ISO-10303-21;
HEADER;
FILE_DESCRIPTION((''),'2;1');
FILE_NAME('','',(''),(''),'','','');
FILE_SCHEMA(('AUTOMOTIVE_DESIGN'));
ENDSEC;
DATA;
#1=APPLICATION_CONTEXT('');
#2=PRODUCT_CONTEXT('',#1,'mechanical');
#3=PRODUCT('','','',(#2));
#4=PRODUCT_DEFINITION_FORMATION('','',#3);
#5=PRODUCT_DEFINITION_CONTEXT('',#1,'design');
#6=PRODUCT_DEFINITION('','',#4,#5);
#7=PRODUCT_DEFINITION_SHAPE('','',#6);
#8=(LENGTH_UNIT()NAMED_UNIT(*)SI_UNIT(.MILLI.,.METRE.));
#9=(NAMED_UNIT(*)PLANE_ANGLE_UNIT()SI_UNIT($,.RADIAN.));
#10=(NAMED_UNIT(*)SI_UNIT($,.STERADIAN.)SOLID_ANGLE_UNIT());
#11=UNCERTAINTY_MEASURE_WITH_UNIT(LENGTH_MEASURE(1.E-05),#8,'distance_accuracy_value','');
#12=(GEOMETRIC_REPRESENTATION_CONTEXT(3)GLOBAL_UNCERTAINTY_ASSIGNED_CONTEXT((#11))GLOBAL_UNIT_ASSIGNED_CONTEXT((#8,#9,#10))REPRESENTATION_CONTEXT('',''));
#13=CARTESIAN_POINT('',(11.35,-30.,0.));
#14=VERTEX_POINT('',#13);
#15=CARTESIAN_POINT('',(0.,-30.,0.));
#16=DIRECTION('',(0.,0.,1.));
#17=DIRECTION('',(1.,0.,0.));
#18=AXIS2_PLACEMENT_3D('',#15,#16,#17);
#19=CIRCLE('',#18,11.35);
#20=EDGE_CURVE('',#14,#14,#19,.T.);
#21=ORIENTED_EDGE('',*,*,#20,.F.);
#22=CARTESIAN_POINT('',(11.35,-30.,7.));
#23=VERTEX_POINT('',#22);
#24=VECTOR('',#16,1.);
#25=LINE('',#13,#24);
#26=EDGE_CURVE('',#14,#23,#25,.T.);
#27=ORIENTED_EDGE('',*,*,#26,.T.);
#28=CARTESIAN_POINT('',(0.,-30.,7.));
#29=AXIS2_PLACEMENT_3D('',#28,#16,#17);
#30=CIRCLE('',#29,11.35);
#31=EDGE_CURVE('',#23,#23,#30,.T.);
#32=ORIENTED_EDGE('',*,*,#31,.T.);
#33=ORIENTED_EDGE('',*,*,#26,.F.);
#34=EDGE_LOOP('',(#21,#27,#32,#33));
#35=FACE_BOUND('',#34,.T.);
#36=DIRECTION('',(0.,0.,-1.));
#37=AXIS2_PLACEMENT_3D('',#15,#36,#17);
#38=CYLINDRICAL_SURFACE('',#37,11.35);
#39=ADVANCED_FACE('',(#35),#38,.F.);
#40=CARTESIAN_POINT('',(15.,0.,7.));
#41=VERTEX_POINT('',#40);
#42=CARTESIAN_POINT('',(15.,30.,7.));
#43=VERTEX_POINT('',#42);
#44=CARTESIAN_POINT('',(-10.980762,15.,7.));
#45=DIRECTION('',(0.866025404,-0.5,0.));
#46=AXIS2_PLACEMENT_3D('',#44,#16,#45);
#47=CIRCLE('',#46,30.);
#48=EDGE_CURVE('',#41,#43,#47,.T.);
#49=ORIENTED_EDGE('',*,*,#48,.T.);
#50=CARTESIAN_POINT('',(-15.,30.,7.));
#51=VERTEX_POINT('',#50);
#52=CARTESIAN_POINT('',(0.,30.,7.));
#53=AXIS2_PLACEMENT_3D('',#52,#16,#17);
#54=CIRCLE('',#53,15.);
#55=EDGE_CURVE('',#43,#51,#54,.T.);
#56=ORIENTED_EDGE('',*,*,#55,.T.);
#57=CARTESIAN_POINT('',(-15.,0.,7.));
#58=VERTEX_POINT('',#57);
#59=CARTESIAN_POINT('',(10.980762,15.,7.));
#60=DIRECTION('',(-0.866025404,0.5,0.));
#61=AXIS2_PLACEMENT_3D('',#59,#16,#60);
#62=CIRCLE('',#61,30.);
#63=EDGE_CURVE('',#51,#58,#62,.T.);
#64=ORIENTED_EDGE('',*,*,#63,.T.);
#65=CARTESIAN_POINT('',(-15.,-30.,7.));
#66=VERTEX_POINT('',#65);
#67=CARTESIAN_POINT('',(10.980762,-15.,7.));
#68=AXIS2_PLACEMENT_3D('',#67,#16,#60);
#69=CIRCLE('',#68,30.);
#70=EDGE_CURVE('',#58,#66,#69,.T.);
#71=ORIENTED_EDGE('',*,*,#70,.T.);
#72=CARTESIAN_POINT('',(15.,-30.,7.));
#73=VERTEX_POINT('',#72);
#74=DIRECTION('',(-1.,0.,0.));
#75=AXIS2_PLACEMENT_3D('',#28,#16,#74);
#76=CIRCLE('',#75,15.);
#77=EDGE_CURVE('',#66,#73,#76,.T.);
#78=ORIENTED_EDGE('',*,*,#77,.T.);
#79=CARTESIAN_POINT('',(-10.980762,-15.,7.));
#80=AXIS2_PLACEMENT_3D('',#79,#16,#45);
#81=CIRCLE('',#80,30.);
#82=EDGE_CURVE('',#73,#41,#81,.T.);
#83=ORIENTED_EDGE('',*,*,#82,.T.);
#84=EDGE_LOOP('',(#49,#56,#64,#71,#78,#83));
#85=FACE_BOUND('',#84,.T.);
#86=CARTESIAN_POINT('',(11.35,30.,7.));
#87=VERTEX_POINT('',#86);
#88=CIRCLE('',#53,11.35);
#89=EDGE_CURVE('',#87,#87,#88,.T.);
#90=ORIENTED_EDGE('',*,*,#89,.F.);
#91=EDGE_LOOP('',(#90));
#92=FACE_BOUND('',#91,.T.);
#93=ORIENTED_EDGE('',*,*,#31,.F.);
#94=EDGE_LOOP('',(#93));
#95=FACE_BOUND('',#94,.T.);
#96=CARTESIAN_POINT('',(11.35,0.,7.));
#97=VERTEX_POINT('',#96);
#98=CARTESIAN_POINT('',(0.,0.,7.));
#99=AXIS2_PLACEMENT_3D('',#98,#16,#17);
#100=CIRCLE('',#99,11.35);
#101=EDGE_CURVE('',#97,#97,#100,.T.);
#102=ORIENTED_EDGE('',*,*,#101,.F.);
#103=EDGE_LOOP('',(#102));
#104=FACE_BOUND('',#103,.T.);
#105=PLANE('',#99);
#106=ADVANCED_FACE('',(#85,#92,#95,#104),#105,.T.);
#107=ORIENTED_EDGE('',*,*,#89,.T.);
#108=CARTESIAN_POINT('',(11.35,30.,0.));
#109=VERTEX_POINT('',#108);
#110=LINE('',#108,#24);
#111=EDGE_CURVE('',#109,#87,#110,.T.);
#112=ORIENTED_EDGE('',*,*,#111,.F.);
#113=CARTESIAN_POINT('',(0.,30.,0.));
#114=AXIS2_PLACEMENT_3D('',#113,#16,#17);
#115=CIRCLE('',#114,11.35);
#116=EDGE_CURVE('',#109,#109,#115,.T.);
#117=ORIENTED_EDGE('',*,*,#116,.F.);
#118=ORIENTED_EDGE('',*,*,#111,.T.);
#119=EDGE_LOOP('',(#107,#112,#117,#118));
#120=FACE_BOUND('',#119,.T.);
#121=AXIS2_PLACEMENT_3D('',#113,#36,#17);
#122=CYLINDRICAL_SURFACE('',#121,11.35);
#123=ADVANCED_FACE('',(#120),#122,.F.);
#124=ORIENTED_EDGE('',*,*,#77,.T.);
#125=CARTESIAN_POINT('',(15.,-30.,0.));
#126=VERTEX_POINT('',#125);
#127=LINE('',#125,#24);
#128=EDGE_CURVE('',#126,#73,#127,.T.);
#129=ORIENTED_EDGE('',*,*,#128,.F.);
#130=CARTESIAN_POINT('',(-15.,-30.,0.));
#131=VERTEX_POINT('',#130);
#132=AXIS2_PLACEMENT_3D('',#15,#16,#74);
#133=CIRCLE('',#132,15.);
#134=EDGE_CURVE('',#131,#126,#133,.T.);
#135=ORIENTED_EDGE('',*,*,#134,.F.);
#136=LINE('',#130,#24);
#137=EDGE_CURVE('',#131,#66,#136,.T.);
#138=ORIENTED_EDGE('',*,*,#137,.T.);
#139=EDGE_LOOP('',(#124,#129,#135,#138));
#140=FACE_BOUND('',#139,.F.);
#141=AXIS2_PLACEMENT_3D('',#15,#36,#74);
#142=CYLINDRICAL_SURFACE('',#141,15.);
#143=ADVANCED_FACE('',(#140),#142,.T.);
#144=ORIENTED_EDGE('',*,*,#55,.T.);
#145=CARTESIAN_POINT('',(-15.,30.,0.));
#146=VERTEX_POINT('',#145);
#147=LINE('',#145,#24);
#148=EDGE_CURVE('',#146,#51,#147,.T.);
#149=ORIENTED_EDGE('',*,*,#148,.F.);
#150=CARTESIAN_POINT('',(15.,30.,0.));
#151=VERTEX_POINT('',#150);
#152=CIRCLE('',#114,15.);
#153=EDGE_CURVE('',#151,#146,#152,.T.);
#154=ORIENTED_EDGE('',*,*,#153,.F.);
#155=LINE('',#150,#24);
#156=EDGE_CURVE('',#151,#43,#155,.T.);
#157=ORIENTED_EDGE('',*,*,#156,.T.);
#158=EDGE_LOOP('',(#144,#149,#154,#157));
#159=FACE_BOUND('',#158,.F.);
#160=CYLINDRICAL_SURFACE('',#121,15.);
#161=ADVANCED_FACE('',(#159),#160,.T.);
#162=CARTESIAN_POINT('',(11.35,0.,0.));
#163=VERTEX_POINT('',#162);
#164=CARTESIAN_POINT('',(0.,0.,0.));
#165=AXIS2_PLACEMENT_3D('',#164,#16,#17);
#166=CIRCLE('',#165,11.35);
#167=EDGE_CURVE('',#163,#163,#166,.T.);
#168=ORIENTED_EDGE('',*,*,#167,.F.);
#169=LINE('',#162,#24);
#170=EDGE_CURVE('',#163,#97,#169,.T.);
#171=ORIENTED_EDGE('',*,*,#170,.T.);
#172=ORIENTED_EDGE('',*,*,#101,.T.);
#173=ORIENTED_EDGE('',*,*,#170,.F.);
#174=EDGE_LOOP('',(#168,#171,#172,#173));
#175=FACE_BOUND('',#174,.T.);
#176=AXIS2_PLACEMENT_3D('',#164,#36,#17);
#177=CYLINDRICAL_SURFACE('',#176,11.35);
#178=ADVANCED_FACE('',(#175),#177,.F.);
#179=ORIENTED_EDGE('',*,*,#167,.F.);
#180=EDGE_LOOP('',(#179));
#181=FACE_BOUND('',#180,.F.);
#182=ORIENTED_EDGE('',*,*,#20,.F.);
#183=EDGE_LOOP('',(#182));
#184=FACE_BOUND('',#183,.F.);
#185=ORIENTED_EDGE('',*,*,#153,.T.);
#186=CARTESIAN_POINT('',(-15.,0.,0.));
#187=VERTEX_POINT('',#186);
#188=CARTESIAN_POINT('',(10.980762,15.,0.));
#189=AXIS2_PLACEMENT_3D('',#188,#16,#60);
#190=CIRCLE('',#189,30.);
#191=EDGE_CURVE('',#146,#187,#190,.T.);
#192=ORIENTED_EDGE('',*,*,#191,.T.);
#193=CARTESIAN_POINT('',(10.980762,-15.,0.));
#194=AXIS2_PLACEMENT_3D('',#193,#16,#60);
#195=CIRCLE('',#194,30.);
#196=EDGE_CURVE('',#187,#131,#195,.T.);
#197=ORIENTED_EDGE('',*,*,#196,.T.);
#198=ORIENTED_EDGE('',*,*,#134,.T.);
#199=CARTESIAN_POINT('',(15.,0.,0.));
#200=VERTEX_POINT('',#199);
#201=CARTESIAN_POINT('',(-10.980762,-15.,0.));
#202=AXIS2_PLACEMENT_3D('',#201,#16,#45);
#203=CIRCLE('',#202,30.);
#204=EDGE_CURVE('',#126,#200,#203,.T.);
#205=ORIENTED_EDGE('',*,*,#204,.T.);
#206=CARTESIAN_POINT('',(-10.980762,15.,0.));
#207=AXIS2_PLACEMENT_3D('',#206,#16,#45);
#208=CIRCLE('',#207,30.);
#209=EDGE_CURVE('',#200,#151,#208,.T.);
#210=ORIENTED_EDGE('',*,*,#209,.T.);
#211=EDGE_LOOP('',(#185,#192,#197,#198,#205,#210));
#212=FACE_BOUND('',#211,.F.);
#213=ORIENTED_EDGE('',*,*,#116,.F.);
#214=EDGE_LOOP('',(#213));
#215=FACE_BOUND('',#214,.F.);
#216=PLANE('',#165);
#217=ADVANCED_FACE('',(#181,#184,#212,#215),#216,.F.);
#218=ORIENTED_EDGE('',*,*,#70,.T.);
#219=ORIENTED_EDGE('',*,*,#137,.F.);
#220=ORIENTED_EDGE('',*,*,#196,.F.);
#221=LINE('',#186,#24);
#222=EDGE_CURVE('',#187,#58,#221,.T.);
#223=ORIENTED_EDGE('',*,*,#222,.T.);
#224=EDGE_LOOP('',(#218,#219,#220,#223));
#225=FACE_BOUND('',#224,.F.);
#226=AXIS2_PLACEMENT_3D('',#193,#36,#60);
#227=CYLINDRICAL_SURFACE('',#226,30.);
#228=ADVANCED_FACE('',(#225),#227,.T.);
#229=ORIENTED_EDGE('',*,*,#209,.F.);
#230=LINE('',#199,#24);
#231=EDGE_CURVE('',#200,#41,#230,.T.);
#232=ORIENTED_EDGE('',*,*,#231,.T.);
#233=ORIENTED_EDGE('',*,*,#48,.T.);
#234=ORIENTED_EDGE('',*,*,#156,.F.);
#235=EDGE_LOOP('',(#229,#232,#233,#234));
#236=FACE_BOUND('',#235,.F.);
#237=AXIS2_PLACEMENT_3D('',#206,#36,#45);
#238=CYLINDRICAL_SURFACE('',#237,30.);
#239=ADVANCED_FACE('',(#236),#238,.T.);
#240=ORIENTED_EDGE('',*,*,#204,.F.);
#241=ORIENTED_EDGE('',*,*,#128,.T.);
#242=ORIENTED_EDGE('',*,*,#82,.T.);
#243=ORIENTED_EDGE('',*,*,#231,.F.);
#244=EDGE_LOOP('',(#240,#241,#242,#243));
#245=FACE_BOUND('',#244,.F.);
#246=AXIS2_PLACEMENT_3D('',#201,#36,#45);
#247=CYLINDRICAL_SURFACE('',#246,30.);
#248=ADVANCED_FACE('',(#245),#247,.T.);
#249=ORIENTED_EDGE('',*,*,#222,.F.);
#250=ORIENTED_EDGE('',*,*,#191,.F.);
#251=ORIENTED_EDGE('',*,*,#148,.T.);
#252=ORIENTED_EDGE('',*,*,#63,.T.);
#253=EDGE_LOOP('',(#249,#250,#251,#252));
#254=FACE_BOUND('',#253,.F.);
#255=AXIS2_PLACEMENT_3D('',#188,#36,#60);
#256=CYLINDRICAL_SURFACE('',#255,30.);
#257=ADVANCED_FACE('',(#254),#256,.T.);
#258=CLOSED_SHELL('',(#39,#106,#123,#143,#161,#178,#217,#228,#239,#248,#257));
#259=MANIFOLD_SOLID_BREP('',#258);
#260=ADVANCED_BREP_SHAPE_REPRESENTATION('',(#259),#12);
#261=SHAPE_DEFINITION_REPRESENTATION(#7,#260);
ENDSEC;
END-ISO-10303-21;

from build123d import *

# Parameters (mm, degrees)
F0_R     = 11.35
F1_DEPTH = 7


# Not quite as in the source:
# - a feature names something its author has since deleted; it is built from what else it names


with BuildPart() as f1:
    # F0 (on Top) → F1 (new body)
    with BuildSketch(Plane.XY):
        with BuildLine():
            ThreePointArc((0, -15), (10.6066017178, -10.6066017178), (15, 0))
            ThreePointArc((15, 0), (10.6066016959, 10.6066017397), (-6.18e-08, 15))
            ThreePointArc((-6.18e-08, 15), (-10.6066017397, 10.6066016959), (-15, 0))
            ThreePointArc((-15, 0), (-10.6066017178, -10.6066017178), (0, -15))
        make_face()
        Circle(F0_R, mode=Mode.SUBTRACT)
        with BuildLine():
            ThreePointArc((15, -30), (19.0192378865, -15), (15, 0))
            ThreePointArc((15, 0), (10.6066017178, -10.6066017178), (0, -15))
            ThreePointArc((0, -15), (10.6066017178, -19.3933982822), (15, -30))
        make_face()
        with BuildLine():
            ThreePointArc((-6.18e-08, 15), (10.6066016959, 10.6066017397), (15, 0))
            ThreePointArc((15, 0), (19.0192378865, 15), (15, 30))
            ThreePointArc((15, 30), (10.6066016959, 19.3933982603), (-6.18e-08, 15))
        make_face()
        with BuildLine():
            ThreePointArc((-15, 0), (-10.6066017397, 10.6066016959), (-6.18e-08, 15))
            ThreePointArc((-6.18e-08, 15), (-10.6066017397, 19.3933983041), (-15, 30))
            ThreePointArc((-15, 30), (-19.0192378865, 15), (-15, 0))
        make_face()
        with BuildLine():
            ThreePointArc((-15, 30), (-10.6066017397, 19.3933983041), (-6.18e-08, 15))
            ThreePointArc((-6.18e-08, 15), (10.6066016959, 19.3933982603), (15, 30))
            ThreePointArc((15, 30), (0, 45), (-15, 30))
        make_face()
        with Locations((0, 30)):
            Circle(F0_R, mode=Mode.SUBTRACT)
        with BuildLine():
            ThreePointArc((-15, -30), (-10.6066017178, -19.3933982822), (0, -15))
            ThreePointArc((0, -15), (-10.6066017178, -10.6066017178), (-15, 0))
            ThreePointArc((-15, 0), (-19.0192378865, -15), (-15, -30))
        make_face()
        with BuildLine():
            ThreePointArc((15, -30), (10.6066017178, -19.3933982822), (0, -15))
            ThreePointArc((0, -15), (-10.6066017178, -19.3933982822), (-15, -30))
            ThreePointArc((-15, -30), (0, -45), (15, -30))
        make_face()
        with Locations((0, -30)):
            Circle(F0_R, mode=Mode.SUBTRACT)
    extrude(amount=F1_DEPTH)


solid = f1.part
